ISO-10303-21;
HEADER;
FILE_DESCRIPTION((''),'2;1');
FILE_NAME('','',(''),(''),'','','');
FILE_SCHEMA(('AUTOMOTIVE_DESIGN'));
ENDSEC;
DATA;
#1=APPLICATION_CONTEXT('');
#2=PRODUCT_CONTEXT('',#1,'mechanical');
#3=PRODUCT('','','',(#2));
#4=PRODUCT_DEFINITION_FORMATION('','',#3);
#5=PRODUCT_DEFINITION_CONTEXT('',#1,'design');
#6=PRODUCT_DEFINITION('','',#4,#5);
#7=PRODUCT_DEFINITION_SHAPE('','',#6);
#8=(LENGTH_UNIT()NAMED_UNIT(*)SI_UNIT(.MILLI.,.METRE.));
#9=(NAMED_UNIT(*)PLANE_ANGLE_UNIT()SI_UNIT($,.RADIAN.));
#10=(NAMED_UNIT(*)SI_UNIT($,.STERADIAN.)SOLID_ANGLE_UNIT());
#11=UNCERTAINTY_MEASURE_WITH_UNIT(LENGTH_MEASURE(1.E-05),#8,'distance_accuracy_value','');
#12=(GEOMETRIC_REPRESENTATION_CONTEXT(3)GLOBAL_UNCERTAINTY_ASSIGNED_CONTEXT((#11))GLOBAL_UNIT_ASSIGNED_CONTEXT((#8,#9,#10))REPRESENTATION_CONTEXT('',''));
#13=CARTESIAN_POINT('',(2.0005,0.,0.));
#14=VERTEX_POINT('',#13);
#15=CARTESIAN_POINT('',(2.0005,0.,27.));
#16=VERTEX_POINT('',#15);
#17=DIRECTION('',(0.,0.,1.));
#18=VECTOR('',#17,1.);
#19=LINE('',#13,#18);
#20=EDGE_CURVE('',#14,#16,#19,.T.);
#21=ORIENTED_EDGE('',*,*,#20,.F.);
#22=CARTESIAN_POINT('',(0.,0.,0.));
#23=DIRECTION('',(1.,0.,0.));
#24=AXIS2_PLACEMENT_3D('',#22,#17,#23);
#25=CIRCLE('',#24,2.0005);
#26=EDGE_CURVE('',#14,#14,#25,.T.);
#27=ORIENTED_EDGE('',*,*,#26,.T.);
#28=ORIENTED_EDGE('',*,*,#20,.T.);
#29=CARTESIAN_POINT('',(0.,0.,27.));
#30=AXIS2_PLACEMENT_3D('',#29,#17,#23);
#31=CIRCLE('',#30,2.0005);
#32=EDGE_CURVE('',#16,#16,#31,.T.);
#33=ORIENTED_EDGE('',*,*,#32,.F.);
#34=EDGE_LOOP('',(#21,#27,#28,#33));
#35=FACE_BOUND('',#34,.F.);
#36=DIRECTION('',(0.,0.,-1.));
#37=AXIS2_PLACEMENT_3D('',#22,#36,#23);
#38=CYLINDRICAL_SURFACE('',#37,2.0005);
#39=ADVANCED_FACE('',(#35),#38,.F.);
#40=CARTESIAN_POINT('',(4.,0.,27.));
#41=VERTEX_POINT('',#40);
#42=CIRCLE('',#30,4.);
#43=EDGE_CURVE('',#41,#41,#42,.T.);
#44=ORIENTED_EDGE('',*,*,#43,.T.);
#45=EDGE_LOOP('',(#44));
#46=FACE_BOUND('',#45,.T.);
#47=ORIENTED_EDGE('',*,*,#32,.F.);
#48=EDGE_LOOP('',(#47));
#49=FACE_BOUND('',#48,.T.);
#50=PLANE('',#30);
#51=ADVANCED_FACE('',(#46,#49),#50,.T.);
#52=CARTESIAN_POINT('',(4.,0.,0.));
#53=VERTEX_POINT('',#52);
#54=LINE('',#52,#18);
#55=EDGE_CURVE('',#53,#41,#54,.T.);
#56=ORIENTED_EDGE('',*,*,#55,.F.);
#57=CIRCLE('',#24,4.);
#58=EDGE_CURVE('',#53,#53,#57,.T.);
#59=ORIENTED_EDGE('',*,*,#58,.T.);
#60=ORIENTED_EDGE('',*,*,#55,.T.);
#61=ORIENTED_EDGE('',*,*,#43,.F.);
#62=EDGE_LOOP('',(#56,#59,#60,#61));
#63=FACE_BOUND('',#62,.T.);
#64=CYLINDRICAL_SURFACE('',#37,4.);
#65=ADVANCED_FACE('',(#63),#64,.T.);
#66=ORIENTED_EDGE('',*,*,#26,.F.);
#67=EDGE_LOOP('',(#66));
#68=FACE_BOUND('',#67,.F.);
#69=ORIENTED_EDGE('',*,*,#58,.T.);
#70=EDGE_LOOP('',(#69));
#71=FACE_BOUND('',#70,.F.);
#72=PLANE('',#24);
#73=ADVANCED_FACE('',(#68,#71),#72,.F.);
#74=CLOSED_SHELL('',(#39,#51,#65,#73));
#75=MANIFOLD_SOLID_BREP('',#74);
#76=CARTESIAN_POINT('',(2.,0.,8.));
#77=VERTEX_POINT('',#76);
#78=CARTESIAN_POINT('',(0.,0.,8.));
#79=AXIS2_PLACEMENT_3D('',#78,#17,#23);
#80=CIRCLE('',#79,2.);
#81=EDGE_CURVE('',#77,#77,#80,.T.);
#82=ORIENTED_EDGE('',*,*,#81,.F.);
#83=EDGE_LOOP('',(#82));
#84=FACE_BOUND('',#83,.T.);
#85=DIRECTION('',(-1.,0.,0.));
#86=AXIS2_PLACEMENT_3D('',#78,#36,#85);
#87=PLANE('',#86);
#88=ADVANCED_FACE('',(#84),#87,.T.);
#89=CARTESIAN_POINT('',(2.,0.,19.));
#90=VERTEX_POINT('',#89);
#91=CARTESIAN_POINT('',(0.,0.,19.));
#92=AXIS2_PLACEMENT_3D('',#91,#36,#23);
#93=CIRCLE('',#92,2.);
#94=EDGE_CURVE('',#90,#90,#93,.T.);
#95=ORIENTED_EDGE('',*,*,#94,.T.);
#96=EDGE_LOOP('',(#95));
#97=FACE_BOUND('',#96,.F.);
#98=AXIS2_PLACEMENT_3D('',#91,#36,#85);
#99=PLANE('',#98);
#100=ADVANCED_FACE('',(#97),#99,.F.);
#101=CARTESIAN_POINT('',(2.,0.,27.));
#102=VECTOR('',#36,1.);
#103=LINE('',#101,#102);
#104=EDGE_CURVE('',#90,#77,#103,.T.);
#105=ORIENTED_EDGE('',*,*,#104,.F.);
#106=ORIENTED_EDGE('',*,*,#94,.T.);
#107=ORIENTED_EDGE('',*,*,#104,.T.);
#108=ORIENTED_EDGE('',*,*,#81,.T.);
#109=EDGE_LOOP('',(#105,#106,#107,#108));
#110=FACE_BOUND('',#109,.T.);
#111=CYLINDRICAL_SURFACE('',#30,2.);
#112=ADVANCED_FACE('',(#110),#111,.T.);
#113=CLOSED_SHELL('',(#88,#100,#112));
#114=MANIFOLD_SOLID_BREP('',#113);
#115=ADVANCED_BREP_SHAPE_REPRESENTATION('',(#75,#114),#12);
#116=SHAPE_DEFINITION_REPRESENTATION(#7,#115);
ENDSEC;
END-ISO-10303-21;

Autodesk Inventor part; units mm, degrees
ref_plane "YZ Plane" through (0, 0, 0) normal (1, 0, 0) x (0, 1, 0)
ref_plane "XZ Plane" through (0, 0, 0) normal (0, 1, 0) x (-1, 0, 0)
sketch "スケッチ1" plane through (0, 0, 0) normal (0, 0, 1) x (1, 0, 0)
  circle A0 centre (0, 0) radius 4
  circle A1 centre (0, 0) radius 2.0005
  dimension "d0" = 8
  dimension "d1" = 4.001
extrude "押し出し1" add sketch "スケッチ1" along normal blind 27
sketch "スケッチ2" plane through (0, 0, 27) normal (0, 0, 1) x (1, 0, 0)
  circle A0 centre (0, 0) radius 2
  dimension "d4" = 4
extrude "押し出し2" add sketch "スケッチ2" against normal blind 25
hole "穴1" at (0, 0, 27) direction (0, 0, -1) diameter 4 depth 8 tip angle 118
hole "穴2" at (0, 0, 0) direction (0, 0, 1) diameter 4 depth 8 tip angle 118
ref_plane "作業平面1" through (0, 0, 8) normal (0, 0, -1) x (-1, 0, 0)
sketch "スケッチ3" plane through (0, 0, 8) normal (0, 0, -1) x (-1, 0, 0)
  circle A0 centre (0, 0) radius 2.0005 projected
  circle A1 centre (0, 0) radius 4 projected
  circle A2 centre (0, 0) radius 2 projected
sketch "スケッチ3 outline for 押し出し3" plane through (0, 0, 8) normal (0, 0, -1) x (-1, 0, 0)
  circle A0 centre (0, 0) radius 2
extrude "押し出し3" add sketch "スケッチ3 outline for 押し出し3" against normal blind 11
properties part number "スペーサーm4-27　簡易筒型" material "アルミニウム 2014-T4"
